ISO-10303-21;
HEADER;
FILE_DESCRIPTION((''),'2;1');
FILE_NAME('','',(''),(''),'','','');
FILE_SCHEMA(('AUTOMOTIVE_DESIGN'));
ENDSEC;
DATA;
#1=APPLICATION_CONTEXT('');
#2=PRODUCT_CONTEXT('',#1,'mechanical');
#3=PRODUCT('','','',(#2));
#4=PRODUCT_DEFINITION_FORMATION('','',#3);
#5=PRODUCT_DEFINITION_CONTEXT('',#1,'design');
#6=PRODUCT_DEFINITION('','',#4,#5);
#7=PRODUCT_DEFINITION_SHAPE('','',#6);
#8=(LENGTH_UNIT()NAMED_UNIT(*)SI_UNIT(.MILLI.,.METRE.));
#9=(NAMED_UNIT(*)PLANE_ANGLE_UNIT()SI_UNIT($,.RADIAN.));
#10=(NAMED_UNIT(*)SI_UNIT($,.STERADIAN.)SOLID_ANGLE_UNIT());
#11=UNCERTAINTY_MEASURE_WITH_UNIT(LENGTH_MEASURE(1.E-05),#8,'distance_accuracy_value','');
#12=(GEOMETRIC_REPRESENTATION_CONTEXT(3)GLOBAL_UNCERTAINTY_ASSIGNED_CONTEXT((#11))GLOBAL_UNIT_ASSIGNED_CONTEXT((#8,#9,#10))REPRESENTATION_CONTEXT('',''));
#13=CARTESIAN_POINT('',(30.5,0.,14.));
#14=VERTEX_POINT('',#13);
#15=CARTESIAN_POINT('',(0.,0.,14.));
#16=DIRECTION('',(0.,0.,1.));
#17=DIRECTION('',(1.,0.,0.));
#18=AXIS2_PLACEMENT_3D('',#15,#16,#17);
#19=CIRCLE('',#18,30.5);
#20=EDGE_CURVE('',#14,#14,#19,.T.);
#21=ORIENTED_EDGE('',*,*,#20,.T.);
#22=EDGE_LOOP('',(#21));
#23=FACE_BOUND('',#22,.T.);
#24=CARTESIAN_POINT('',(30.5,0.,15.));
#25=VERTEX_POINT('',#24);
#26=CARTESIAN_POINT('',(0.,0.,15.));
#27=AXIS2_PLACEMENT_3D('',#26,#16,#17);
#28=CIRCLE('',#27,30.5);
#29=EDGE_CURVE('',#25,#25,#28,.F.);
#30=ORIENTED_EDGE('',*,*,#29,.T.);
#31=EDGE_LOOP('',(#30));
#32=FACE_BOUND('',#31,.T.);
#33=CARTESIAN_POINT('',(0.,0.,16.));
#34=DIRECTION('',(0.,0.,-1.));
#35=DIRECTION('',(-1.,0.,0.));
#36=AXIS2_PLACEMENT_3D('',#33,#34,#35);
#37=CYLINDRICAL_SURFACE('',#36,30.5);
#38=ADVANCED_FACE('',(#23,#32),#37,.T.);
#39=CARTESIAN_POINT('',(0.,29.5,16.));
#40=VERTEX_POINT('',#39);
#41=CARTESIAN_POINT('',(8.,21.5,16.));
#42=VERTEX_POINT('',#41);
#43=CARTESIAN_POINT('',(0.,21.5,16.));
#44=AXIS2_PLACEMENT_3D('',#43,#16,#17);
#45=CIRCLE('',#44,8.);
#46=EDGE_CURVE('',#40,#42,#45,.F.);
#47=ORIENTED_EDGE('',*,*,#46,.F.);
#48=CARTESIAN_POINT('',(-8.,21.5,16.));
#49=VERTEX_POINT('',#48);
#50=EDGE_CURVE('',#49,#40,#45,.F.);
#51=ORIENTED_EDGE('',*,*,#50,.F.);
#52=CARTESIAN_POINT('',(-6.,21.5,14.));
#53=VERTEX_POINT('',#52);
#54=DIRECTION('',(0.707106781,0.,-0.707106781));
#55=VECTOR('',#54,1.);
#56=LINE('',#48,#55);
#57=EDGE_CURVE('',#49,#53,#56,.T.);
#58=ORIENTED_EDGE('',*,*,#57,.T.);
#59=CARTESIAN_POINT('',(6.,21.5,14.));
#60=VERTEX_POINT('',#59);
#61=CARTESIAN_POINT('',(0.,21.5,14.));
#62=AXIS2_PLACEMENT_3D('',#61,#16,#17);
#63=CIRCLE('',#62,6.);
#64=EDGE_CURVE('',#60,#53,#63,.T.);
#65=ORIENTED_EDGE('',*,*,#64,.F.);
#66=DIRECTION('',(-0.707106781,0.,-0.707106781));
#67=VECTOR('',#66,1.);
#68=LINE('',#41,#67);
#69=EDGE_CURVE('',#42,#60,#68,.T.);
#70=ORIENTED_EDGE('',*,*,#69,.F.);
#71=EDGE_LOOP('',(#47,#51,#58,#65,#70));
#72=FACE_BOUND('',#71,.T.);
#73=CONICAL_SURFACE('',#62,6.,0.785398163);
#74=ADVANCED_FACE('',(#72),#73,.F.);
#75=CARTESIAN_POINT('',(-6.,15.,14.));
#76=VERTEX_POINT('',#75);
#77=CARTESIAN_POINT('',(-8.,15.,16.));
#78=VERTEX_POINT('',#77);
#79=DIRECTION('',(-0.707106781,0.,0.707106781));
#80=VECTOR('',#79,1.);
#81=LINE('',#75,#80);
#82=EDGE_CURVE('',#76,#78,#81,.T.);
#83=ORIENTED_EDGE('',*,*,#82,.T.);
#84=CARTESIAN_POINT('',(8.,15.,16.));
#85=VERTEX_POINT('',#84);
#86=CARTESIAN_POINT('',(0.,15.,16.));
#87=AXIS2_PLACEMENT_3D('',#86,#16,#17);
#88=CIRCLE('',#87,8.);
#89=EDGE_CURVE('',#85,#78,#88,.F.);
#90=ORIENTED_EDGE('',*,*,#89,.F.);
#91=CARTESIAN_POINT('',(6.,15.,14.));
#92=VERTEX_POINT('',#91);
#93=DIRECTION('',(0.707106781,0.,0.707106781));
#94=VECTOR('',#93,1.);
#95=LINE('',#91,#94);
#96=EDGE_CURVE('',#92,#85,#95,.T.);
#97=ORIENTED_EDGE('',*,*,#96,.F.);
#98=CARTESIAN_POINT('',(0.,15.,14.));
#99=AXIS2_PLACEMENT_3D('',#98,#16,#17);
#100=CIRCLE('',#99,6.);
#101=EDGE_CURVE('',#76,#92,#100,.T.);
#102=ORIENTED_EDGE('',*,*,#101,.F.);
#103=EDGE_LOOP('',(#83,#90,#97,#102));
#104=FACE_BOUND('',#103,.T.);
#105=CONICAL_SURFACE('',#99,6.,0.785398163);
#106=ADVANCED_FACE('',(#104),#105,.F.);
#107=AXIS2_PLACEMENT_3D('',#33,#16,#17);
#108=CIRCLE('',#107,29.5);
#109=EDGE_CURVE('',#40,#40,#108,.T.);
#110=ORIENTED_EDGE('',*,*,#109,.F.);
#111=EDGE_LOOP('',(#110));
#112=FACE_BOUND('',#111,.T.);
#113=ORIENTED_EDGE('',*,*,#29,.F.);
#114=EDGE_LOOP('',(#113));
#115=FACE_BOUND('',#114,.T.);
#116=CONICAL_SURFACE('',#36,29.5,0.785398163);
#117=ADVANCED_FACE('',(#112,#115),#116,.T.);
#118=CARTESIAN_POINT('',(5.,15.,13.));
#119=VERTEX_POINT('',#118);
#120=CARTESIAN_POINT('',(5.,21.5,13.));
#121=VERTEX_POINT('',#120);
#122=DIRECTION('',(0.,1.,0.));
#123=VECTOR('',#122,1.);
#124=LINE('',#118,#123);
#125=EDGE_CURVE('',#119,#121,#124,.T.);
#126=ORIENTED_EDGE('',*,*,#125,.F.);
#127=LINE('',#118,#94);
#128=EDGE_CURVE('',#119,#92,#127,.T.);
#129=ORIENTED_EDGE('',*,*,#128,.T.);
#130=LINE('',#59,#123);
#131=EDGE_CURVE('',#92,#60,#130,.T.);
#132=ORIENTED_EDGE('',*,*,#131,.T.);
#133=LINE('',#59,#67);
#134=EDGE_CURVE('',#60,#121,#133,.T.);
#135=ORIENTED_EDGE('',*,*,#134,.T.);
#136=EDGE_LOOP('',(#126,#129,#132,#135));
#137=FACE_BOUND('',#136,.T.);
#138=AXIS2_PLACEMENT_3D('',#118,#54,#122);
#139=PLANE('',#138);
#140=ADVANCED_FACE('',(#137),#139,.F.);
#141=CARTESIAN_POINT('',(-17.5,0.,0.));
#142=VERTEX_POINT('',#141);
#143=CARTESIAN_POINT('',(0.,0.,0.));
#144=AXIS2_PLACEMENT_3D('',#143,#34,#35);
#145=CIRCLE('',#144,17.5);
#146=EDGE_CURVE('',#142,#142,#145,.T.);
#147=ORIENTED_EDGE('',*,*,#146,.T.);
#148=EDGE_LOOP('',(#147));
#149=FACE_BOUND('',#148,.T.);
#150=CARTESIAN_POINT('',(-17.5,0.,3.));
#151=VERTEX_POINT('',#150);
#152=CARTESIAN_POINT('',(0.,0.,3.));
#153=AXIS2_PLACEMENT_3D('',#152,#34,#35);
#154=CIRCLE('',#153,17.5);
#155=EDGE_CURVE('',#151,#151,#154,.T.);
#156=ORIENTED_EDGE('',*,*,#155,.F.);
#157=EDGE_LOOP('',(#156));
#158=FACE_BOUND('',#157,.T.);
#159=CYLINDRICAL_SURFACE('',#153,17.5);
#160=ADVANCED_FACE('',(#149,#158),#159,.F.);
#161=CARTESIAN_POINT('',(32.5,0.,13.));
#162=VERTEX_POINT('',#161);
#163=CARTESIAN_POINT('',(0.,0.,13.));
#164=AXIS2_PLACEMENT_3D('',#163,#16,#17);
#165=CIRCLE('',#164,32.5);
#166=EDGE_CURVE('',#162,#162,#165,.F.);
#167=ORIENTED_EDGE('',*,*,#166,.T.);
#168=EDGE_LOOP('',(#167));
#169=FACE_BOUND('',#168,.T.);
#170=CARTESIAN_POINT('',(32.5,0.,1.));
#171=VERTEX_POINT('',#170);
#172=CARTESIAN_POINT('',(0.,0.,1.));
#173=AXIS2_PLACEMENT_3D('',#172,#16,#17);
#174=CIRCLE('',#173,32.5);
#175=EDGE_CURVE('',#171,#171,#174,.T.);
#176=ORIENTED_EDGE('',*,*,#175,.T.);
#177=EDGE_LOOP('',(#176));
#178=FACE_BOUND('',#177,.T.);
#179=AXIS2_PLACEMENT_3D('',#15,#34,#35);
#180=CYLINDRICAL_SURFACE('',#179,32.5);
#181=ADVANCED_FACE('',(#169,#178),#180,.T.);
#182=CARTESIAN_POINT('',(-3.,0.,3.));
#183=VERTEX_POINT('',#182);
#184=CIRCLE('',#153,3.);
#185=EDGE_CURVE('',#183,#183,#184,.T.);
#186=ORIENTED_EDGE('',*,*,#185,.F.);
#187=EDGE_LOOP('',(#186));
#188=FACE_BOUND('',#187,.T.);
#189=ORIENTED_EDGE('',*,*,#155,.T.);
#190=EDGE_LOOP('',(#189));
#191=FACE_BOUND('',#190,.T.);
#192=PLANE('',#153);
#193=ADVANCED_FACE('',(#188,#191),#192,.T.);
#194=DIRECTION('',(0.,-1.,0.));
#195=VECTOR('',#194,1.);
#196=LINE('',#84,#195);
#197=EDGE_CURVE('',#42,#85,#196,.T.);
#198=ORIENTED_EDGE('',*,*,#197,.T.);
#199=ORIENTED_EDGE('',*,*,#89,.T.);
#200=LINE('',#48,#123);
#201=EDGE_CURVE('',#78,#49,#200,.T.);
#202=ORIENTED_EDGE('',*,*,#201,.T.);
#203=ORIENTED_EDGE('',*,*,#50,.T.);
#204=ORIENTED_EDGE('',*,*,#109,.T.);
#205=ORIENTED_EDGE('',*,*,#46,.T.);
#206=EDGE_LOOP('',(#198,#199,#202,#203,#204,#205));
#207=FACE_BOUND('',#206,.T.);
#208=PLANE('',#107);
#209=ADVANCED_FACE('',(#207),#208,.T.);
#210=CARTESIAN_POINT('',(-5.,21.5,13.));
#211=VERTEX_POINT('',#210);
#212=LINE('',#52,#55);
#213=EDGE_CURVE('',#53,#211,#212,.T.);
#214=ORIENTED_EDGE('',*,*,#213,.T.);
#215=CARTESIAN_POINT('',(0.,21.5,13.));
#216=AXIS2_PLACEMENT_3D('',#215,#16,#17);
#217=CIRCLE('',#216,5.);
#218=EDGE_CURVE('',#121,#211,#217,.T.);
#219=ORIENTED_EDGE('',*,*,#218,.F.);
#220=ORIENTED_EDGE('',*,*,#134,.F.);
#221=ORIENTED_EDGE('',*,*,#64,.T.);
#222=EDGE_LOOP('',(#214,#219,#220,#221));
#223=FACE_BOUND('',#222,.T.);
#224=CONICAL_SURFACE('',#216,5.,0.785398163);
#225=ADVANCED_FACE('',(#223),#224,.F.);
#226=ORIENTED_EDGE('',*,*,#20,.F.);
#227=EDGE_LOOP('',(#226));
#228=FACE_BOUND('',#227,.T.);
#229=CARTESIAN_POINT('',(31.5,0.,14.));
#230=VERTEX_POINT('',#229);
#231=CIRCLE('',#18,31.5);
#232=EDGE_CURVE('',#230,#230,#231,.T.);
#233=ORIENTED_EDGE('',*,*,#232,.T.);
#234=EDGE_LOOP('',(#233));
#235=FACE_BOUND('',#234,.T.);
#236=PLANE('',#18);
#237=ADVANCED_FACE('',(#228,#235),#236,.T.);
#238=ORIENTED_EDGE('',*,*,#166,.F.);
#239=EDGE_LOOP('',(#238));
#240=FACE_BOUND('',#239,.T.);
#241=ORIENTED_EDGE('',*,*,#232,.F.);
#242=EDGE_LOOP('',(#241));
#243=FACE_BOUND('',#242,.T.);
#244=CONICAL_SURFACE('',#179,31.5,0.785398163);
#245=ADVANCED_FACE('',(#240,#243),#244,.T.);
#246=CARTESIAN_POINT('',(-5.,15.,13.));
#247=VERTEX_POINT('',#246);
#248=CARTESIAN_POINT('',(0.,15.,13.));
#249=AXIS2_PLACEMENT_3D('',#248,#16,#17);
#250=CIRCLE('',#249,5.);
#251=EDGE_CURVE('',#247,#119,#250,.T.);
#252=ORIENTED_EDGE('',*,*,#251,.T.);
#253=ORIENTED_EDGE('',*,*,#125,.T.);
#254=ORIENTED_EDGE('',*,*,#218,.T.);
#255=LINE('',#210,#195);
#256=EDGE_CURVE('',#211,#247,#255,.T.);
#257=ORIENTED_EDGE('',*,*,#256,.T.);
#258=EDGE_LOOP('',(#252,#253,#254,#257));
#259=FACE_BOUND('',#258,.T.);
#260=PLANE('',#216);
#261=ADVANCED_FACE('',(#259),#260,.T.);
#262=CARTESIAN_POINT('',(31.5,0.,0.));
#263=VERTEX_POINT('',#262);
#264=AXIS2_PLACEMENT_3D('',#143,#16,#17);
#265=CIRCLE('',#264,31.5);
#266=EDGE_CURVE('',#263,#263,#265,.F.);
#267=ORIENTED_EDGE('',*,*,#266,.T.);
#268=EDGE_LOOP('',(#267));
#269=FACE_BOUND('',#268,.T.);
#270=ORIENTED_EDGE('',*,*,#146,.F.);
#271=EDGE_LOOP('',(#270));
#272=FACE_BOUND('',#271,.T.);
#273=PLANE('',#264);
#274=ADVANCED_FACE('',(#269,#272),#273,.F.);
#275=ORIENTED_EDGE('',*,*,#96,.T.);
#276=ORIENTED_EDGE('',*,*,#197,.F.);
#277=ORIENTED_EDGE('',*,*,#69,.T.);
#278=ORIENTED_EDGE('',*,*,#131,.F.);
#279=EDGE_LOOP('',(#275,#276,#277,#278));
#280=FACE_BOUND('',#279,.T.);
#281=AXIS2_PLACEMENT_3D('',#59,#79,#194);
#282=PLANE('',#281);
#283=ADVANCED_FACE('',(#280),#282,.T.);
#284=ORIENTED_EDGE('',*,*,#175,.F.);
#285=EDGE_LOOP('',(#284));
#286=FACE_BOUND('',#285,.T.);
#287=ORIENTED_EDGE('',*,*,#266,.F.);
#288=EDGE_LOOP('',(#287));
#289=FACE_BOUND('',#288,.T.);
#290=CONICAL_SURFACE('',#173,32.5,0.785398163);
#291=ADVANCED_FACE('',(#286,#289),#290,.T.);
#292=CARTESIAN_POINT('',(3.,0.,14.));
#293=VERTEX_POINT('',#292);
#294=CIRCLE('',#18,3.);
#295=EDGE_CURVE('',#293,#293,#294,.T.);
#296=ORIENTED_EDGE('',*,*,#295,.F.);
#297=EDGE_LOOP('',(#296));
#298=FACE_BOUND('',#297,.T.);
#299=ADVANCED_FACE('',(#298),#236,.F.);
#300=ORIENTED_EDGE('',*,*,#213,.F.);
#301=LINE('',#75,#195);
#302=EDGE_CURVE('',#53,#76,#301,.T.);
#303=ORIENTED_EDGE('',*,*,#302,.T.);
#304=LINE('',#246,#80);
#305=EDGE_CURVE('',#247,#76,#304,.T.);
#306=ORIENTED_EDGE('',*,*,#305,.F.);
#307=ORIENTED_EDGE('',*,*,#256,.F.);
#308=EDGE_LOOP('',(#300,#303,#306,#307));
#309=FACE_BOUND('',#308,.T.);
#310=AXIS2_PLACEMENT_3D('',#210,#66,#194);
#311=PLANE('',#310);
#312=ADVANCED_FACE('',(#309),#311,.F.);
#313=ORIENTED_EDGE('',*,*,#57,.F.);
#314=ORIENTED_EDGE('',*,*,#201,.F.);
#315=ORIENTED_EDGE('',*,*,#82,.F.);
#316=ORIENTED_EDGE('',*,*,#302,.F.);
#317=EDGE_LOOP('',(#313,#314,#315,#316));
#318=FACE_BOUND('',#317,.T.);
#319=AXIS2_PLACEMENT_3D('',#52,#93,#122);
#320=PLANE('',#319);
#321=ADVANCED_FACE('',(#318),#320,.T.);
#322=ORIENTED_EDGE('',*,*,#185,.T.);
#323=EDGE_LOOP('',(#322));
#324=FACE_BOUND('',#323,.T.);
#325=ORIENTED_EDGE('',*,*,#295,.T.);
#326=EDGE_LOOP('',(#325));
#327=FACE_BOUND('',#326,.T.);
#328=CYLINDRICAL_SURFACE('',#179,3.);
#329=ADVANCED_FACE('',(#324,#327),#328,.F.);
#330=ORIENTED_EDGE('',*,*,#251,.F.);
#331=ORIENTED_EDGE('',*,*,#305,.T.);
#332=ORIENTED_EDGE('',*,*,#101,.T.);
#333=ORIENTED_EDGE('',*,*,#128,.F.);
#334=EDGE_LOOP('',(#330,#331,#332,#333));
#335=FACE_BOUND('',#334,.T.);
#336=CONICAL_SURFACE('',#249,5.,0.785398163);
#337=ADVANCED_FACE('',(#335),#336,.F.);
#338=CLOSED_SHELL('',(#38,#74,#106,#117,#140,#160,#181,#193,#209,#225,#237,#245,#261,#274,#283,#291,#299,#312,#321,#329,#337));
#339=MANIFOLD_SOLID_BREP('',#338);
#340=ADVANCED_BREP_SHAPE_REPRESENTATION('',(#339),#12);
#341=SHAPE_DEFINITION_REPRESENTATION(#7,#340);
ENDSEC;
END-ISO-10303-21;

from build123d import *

# Parameters (mm, degrees)
CROQUIS1_R              = 32.5
CROQUIS1_R_2            = 3
SALIENTE_EXTRUIR1_DEPTH = 14
CROQUIS2_R              = 17.5
CORTAR_EXTRUIR1_DEPTH   = 3
CROQUIS3_R              = 30.5
SALIENTE_EXTRUIR2_DEPTH = 2
CHAFL_N1_SIZE           = 1
CORTAR_EXTRUIR2_DEPTH   = 3
CHAFL_N2_SIZE           = 2
SALIENTE_EXTRUIR3_START = 1
SALIENTE_EXTRUIR3_DEPTH = 1
CHAFL_N3_SIZE           = 1


with BuildPart() as part:
    # Croquis1 → Saliente-Extruir1 (new body)
    with BuildSketch(Plane.XY):
        Circle(CROQUIS1_R)
        Circle(CROQUIS1_R_2, mode=Mode.SUBTRACT)
    extrude(amount=SALIENTE_EXTRUIR1_DEPTH)

    # Croquis2 → Cortar-Extruir1 (cut)
    with BuildSketch(Plane(origin=(0, 0, 0), x_dir=(-1, 0, 0), z_dir=(0, 0, -1))):
        Circle(CROQUIS2_R)
    extrude(amount=-CORTAR_EXTRUIR1_DEPTH, mode=Mode.SUBTRACT)

    # Croquis3 → Saliente-Extruir2 (add)
    with BuildSketch(Plane.XY.offset(14)):
        Circle(CROQUIS3_R)
    extrude(amount=SALIENTE_EXTRUIR2_DEPTH)

    # Chaflán1
    chafl_n1_edges = [part.edges().sort_by_distance(p)[0] for p in [
        (-30.5, 0, 16),
        (-32.5, 0, 0),
        (-32.5, 0, 14),
    ]]
    chamfer(chafl_n1_edges, length=CHAFL_N1_SIZE)

    # Croquis4 → Cortar-Extruir2 (cut)
    with BuildSketch(Plane.XY.offset(16)):
        with BuildLine():
            Line((6, 21.5), (6, 15))
            ThreePointArc((6, 15), (0, 9), (-6, 15))
            Line((-6, 15), (-6, 21.5))
            ThreePointArc((-6, 21.5), (0, 27.5), (6, 21.5))
        make_face()
    extrude(amount=-CORTAR_EXTRUIR2_DEPTH, mode=Mode.SUBTRACT)

    # Chaflán2
    chafl_n2_edges = [part.edges().sort_by_distance(p)[0] for p in [
        (0, 27.5, 16),
        (-6, 18.25, 16),
        (0, 9, 16),
        (6, 18.25, 16),
    ]]
    chamfer(chafl_n2_edges, length=CHAFL_N2_SIZE - 0.0001)  # a hair under: the kernel refuses the full size

    # Croquis5 → Saliente-Extruir3 (add)
    with BuildSketch(Plane.XY.offset(13).offset(SALIENTE_EXTRUIR3_START)):
        with BuildLine():
            Line((-6, 21.5), (-6, 15))
            ThreePointArc((-6, 15), (0, 9), (6, 15))
            Line((6, 15), (6, 21.5))
            ThreePointArc((6, 21.5), (0, 27.5), (-6, 21.5))
        make_face()
        with BuildLine():
            Line((5, 15), (5, 21.5))
            ThreePointArc((5, 21.5), (0, 26.5), (-5, 21.5))
            Line((-5, 21.5), (-5, 15))
            ThreePointArc((-5, 15), (0, 10), (5, 15))
        make_face(mode=Mode.SUBTRACT)
    extrude(amount=-SALIENTE_EXTRUIR3_DEPTH)

    # Chaflán3
    chafl_n3_edges = [part.edges().sort_by_distance(p)[0] for p in [
        (5, 18.25, 14),
        (0, 26.5, 14),
        (0, 10, 14),
        (-5, 18.25, 14),
    ]]
    chamfer(chafl_n3_edges, length=CHAFL_N3_SIZE - 0.0001)  # a hair under: the kernel refuses the full size


solid = part.part
